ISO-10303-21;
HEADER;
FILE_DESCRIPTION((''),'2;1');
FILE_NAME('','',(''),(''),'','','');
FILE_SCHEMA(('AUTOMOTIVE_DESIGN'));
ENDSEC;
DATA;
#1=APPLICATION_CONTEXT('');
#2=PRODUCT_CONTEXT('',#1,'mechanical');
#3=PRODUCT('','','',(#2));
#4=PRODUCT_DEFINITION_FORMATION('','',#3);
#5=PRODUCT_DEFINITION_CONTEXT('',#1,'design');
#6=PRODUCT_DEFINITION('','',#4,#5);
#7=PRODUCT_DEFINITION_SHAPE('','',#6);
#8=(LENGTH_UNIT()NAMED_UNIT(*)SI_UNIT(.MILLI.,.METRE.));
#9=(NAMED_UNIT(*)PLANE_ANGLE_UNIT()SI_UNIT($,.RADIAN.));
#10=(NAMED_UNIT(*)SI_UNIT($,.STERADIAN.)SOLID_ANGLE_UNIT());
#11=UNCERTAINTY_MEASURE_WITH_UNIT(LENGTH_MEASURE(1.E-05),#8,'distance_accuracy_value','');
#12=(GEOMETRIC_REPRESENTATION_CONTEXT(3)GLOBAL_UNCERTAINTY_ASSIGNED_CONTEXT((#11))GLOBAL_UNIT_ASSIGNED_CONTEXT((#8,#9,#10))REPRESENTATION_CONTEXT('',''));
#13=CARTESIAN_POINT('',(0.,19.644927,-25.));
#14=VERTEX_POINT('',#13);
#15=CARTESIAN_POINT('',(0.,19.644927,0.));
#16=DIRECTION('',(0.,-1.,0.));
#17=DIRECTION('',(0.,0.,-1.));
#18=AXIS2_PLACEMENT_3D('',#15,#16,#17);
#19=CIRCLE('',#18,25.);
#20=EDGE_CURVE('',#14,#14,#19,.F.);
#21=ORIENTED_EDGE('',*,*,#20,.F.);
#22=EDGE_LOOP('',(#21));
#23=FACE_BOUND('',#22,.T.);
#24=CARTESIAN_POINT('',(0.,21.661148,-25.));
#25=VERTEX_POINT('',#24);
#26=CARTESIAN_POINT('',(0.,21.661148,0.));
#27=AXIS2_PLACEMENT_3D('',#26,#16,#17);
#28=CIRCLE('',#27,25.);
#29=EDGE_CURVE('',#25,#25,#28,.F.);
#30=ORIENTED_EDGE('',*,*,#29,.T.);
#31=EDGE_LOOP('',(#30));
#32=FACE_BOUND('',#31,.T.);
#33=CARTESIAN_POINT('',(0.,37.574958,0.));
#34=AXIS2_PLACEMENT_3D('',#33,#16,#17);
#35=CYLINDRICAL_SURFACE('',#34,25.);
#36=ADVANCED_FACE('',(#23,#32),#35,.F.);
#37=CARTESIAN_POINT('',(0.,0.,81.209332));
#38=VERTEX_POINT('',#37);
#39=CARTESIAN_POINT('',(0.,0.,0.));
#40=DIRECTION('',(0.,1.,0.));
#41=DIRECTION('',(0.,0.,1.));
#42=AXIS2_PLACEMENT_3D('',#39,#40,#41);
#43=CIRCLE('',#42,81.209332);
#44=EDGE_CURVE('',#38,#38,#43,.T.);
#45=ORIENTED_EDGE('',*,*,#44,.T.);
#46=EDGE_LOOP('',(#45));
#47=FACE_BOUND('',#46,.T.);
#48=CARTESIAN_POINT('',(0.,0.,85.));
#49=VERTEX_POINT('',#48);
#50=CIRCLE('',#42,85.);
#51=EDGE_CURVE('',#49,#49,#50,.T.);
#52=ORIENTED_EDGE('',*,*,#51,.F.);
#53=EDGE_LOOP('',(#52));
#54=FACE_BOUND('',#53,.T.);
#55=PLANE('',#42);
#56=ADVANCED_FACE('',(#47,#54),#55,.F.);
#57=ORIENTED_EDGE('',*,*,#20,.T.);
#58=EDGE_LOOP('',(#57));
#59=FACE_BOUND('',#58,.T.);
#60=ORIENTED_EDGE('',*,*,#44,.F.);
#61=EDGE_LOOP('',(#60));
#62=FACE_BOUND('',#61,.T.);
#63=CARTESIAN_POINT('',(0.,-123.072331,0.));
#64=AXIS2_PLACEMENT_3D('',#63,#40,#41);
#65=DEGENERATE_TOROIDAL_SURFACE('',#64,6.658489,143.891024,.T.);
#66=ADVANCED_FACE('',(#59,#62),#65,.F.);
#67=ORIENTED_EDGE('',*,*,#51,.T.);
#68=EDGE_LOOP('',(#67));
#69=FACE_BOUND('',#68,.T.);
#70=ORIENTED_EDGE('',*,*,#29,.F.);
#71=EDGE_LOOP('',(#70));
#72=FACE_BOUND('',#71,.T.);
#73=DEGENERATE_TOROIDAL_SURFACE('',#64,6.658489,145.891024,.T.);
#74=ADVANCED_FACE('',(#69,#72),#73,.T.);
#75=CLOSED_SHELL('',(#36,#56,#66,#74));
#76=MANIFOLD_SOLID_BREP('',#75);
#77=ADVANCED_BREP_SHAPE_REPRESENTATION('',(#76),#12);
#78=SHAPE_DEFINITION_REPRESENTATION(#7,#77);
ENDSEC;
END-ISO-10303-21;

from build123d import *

# Parameters (mm, degrees)
SKETCH4_R          = 25
CUT_EXTRUDE1_DEPTH = 37.574958191


# Read off the part's stored shape, not the designer's step: Shell4
with BuildPart() as part:
    # Sketch2 → Revolve3 (revolve)
    with BuildSketch(Plane.XY):
        with BuildLine():
            ThreePointArc((-85, 0), (-44.249157481, 17.892673888), (0, 22.666666667))
            Line((0, 22.666666667), (0, 0))
            Line((0, 0), (-85, 0))
        make_face()
    revolve(axis=Axis((0, 22.666666667, 0), (0, -1, 0)))

    # Shell4 outline → Shell4 (revolve, cut)
    with BuildSketch(Plane.XY):
        with BuildLine():
            Line((0, 0), (81.209332356, 0))
            add(Edge.make_bspline(
                [(81.209332356, 0), (68.010422844, 7.99521566), (53.461432942, 14.388290113), (37.997575401, 18.722433384), (22.188288082, 20.818693148), (5.322203728, 20.818693133), (3.987860722, 20.803180878), (2.655815078, 20.772246575), (1.326414656, 20.725996375), (0, 20.664551338)],
                knots=[1.026160926, 1.026160926, 1.026160926, 1.026160926, 1.026160926, 1.026160926, 1.570268783, 1.570268783, 1.570268783, 1.570268783, 1.617087387, 1.617087387, 1.617087387, 1.617087387, 1.617087387, 1.617087387], degree=5, weights=[1, 1, 0.999461009, 0.999454119, 1, 1, 0.999999976, 0.999999977, 1, 1]))
            Line((0, 20.664551338), (0, 0))
        make_face()
    revolve(axis=Axis((0, 0, 0), (0, 1, 0)), mode=Mode.SUBTRACT)

    # Sketch4 → Cut-Extrude1 (cut)
    with BuildSketch(Plane(origin=(0, 0, 0), x_dir=(1, 0, 0), z_dir=(0, 1, 0))):
        with Locations(Location((0, 0, 0), (0, 0, 90))):
            Circle(SKETCH4_R)
    extrude(amount=CUT_EXTRUDE1_DEPTH, mode=Mode.SUBTRACT)


solid = part.part
